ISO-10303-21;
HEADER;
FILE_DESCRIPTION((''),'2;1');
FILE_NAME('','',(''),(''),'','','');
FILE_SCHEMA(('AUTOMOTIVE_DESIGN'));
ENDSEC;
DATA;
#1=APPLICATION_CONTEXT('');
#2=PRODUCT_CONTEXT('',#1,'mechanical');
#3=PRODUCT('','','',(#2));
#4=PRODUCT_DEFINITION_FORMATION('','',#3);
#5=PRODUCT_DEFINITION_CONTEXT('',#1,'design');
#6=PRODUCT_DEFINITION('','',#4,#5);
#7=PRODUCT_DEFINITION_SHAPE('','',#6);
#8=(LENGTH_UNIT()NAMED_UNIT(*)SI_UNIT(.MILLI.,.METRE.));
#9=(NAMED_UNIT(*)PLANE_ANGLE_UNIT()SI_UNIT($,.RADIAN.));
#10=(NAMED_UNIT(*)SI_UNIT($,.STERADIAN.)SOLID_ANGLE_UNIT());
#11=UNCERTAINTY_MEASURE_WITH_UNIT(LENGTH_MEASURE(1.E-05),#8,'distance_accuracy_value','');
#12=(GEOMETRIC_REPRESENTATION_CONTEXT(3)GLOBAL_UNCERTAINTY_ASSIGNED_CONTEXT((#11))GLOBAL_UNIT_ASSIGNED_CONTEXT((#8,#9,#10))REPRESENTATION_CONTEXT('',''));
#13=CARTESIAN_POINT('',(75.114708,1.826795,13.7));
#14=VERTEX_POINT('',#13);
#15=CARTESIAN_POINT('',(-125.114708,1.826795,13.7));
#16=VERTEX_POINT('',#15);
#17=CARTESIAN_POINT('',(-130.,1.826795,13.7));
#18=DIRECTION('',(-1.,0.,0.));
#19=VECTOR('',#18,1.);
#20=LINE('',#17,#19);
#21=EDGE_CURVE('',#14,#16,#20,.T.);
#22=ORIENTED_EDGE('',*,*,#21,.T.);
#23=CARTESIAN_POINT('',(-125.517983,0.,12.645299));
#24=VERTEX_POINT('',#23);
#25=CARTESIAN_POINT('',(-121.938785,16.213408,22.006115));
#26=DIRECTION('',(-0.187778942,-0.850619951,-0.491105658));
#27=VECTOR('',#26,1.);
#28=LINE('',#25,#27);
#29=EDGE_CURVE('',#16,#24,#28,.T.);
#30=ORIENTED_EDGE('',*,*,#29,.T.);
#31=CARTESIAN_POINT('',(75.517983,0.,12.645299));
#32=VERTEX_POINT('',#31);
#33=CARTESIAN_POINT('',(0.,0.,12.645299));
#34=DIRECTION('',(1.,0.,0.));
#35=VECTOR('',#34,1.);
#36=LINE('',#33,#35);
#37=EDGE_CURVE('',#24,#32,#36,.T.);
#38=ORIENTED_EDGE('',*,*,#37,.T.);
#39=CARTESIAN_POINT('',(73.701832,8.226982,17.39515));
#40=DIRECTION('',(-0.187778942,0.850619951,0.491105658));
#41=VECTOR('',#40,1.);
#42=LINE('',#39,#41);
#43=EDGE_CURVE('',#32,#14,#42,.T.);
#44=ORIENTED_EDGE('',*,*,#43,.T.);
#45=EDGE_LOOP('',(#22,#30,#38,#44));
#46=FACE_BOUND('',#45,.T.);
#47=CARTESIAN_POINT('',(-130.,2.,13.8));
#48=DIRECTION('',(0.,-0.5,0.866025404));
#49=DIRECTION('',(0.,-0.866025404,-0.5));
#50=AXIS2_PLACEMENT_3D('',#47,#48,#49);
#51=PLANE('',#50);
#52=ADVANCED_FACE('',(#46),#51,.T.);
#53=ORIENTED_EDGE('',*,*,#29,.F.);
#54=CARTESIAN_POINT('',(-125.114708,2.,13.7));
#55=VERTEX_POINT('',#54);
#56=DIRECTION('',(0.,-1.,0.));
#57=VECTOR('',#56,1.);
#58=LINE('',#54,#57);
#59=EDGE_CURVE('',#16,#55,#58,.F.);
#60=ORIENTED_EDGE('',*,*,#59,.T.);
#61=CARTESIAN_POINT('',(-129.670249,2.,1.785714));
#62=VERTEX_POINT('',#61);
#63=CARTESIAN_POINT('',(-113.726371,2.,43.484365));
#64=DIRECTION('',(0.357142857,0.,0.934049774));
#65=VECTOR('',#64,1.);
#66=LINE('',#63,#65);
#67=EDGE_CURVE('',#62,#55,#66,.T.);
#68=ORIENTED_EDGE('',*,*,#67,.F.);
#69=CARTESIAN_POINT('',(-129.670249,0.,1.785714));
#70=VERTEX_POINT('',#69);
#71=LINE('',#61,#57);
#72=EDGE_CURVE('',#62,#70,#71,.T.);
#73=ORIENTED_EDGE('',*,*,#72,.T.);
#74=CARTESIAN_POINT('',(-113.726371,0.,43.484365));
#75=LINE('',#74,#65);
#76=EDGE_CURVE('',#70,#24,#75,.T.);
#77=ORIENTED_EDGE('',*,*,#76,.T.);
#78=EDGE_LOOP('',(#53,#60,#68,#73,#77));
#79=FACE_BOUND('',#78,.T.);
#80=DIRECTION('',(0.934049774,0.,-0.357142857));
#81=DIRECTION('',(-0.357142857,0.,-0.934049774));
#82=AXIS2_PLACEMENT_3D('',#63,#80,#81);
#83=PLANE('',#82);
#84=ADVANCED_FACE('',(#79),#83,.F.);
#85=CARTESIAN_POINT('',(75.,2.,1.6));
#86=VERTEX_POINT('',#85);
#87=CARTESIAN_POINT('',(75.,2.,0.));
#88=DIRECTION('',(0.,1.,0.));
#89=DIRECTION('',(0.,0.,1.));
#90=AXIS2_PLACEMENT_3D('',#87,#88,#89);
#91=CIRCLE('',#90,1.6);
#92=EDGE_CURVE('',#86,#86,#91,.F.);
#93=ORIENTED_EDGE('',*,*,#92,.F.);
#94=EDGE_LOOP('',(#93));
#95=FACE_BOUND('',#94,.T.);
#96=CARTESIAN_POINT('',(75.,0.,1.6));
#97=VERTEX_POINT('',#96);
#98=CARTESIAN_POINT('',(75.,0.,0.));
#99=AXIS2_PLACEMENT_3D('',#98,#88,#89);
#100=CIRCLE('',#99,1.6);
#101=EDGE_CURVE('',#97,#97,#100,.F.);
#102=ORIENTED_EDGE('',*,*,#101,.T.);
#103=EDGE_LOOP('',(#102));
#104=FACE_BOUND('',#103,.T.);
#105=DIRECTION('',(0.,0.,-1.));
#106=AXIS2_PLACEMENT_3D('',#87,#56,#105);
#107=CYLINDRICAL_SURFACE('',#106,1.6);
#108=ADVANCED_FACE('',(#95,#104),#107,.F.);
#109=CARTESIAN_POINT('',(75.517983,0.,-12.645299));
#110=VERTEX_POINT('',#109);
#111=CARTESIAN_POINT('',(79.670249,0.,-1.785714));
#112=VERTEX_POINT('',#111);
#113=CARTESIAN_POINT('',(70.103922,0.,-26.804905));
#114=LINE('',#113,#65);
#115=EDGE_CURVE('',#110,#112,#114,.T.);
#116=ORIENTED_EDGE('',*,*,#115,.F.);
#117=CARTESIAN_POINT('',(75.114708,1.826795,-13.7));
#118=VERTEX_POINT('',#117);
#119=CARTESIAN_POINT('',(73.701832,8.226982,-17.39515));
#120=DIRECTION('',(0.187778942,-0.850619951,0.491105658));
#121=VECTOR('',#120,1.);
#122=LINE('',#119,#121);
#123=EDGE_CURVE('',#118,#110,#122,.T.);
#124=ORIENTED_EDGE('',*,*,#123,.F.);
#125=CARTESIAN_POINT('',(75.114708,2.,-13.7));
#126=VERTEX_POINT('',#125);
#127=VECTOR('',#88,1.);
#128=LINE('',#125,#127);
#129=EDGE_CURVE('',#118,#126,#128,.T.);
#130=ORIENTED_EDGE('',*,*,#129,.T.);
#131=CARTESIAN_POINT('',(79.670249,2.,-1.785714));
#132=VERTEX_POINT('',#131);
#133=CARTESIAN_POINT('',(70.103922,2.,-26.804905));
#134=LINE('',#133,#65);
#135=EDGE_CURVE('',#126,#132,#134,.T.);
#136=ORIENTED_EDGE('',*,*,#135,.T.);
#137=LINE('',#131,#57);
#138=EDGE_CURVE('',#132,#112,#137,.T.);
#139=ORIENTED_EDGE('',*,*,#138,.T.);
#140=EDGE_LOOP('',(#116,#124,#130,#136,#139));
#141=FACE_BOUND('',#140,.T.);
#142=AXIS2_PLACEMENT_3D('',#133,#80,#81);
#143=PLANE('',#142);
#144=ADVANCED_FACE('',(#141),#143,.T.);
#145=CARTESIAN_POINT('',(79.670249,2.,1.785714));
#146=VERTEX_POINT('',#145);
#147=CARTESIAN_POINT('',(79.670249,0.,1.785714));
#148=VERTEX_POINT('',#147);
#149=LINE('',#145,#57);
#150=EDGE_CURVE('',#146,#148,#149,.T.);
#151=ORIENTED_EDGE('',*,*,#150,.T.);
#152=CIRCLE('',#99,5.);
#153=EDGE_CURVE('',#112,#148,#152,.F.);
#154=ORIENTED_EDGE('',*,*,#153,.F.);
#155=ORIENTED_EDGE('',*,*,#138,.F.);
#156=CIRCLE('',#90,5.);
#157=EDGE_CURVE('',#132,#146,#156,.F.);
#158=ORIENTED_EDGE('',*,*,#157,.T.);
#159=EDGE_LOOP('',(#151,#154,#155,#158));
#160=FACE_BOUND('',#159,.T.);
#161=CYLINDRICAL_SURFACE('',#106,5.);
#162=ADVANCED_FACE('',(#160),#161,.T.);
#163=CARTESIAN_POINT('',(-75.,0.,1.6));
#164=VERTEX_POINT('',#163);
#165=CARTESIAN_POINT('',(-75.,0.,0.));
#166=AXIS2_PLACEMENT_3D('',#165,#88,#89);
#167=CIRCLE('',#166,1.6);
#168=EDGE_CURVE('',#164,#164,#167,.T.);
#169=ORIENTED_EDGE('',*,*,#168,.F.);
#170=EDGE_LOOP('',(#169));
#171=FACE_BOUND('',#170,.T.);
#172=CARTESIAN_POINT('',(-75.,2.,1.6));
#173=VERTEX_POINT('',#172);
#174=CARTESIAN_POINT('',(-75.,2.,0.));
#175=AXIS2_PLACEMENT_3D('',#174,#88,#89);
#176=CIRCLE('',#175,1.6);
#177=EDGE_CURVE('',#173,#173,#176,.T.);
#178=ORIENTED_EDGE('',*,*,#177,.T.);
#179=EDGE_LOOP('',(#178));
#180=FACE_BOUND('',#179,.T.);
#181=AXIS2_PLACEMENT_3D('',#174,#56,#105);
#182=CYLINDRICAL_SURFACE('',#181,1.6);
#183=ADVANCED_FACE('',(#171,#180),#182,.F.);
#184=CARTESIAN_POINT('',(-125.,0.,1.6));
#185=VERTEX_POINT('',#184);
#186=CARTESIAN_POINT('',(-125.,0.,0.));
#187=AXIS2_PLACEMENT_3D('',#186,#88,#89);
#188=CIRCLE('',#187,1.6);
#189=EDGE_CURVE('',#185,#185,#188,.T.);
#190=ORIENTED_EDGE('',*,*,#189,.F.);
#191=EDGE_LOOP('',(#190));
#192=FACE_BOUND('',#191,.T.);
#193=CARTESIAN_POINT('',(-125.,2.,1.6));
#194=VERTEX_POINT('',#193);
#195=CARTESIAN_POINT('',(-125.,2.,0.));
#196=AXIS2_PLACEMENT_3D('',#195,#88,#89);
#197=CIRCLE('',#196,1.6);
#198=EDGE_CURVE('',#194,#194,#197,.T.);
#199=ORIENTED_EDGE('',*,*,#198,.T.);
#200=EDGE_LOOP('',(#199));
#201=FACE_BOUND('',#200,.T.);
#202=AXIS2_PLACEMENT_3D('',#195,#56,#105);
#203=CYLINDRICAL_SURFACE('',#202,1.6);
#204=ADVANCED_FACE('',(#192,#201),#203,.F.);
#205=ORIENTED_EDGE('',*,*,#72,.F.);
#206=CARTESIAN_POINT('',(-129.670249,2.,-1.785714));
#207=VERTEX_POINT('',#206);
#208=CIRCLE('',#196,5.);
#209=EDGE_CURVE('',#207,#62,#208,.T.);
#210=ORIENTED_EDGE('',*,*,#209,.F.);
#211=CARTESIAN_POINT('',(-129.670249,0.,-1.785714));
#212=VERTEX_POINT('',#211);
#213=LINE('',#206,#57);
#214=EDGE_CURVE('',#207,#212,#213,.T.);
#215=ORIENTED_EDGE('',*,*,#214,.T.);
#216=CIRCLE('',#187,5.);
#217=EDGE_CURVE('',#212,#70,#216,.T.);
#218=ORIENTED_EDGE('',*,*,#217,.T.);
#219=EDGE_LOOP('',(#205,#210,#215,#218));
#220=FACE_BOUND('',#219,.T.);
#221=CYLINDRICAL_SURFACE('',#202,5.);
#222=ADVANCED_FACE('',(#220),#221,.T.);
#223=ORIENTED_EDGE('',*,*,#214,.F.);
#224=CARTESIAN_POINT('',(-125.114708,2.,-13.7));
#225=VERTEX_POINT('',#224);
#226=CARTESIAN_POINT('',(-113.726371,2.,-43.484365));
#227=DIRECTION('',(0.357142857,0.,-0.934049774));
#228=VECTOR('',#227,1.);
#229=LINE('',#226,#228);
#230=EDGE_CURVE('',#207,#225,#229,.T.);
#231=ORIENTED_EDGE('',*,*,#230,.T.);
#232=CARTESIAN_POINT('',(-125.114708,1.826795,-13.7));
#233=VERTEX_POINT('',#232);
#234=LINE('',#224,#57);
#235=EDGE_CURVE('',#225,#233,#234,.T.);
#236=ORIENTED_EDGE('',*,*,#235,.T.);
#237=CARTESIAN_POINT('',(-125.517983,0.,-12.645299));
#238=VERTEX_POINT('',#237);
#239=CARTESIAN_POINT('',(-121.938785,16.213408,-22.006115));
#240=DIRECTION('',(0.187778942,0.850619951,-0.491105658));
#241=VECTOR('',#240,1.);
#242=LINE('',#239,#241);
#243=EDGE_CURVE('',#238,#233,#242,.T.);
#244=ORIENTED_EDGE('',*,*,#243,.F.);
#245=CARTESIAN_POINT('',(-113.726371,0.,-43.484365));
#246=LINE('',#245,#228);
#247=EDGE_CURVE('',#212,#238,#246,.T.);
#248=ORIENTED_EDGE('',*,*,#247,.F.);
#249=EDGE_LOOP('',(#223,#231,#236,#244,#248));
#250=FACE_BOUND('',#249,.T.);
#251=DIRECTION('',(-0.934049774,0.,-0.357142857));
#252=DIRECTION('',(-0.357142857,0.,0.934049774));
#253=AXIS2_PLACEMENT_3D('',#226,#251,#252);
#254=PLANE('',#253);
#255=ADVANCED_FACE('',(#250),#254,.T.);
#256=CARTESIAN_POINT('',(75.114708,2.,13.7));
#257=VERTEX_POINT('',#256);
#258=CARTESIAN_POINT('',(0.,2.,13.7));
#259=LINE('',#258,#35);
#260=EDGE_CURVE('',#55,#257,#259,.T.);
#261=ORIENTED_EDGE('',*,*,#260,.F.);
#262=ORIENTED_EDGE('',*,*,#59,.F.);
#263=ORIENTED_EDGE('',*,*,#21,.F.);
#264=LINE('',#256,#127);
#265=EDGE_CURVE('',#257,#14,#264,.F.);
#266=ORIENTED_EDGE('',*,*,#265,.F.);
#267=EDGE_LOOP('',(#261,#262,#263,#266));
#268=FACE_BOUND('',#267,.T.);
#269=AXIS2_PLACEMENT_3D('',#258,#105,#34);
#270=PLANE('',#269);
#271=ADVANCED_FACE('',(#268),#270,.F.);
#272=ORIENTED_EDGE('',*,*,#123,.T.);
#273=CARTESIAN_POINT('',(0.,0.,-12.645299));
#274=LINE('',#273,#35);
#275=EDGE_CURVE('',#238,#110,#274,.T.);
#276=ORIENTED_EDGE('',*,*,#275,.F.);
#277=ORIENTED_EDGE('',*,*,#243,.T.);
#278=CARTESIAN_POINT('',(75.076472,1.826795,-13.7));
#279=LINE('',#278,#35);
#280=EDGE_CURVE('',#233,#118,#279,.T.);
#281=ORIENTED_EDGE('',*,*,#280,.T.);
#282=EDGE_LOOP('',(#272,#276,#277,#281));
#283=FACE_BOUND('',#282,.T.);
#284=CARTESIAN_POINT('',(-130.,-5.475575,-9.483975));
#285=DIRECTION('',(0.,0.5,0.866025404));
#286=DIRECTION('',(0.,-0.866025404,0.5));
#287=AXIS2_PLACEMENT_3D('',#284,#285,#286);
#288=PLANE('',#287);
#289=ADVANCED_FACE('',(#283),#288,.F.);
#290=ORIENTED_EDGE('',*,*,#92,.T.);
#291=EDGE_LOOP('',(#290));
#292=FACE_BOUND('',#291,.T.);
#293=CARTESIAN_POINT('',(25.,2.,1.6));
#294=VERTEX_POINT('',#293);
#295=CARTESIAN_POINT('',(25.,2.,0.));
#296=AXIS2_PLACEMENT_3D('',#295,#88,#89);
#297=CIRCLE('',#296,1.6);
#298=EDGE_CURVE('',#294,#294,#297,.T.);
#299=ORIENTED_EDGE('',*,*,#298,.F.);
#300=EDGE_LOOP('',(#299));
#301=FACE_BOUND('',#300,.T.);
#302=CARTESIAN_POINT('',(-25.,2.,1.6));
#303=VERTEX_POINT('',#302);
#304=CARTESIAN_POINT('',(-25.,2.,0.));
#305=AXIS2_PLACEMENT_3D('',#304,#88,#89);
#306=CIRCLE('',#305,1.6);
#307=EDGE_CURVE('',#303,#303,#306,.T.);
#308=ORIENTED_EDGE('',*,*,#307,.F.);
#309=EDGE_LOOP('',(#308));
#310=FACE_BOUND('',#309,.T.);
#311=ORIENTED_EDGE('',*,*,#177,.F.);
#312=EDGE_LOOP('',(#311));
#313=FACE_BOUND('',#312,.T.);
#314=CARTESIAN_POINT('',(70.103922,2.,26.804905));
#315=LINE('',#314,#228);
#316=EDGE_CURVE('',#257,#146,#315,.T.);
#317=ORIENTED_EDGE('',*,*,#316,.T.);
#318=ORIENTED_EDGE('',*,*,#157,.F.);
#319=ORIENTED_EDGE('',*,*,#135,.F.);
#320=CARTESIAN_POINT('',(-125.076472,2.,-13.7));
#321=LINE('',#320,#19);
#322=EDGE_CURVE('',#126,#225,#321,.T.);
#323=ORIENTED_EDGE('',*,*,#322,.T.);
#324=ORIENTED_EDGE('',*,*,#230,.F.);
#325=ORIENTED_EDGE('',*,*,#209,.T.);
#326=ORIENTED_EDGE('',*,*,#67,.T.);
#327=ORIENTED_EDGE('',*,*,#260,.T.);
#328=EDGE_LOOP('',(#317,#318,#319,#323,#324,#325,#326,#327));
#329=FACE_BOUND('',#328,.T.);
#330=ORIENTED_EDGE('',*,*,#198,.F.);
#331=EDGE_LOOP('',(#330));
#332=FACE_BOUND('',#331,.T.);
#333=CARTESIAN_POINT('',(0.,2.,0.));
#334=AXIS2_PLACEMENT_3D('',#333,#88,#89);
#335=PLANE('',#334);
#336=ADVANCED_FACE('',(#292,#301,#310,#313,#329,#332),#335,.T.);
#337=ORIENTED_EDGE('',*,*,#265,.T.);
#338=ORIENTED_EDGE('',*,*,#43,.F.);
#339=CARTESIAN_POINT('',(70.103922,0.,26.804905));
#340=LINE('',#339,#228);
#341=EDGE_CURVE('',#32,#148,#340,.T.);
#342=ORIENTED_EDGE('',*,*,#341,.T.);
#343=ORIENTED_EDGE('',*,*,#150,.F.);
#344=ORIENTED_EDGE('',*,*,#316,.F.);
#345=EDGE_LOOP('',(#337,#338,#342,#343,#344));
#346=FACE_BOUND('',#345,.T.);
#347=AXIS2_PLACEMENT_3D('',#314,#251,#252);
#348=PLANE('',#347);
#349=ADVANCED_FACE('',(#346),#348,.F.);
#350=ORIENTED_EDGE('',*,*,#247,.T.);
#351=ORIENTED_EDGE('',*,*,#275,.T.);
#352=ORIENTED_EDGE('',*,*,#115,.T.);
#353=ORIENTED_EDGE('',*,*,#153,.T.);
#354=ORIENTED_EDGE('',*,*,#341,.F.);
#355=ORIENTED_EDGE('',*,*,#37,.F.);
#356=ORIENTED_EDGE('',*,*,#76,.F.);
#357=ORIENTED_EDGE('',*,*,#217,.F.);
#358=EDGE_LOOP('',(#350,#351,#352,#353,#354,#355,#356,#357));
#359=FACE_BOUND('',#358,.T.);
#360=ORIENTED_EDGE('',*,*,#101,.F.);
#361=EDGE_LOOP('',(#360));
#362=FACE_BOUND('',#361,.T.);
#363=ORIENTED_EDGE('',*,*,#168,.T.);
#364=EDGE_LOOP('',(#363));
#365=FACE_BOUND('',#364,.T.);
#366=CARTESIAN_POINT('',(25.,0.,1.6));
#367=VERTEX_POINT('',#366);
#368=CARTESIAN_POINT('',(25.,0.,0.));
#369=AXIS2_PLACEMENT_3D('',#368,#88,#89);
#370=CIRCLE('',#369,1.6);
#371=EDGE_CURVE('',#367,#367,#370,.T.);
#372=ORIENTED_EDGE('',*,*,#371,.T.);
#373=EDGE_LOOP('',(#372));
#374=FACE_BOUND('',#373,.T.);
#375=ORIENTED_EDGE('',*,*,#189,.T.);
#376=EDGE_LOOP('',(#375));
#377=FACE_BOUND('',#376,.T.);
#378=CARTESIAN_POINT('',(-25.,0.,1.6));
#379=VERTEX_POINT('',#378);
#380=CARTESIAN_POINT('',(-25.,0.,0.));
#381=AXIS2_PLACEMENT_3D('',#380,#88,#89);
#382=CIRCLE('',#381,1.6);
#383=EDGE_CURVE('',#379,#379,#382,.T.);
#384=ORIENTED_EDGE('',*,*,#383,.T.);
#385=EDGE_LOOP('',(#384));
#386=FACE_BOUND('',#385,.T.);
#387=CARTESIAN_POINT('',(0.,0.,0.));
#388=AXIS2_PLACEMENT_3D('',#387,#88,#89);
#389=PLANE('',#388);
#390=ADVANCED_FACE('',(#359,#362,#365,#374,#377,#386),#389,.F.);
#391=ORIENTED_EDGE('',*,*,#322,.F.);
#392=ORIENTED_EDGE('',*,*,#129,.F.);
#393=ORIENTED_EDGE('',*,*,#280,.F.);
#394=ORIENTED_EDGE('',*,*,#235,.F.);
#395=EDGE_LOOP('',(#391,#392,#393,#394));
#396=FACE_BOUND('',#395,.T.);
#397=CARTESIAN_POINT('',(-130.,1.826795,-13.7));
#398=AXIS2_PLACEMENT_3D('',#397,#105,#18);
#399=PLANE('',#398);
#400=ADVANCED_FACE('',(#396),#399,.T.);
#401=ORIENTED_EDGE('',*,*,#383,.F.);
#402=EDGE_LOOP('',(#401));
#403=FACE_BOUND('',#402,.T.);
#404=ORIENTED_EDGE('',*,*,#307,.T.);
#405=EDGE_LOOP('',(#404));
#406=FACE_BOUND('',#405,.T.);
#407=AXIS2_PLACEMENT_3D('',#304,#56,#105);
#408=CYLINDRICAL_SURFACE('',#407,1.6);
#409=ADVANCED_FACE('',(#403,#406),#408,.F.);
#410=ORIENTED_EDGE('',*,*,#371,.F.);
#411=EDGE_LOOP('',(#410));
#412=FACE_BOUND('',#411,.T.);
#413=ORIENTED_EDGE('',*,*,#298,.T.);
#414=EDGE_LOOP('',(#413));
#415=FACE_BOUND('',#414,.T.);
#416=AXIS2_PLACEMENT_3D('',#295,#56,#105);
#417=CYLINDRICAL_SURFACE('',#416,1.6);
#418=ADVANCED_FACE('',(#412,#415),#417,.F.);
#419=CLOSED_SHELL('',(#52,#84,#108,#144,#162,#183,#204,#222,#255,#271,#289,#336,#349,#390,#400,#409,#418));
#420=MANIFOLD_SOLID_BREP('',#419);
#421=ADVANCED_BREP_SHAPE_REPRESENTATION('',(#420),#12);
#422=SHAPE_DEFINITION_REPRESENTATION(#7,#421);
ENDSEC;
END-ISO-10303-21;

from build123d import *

# Parameters (mm, degrees)
SKETCH_1_R               = 1.6
EXTRUDE_1_DEPTH          = 2
CUT_EXTRUDE_1_DEPTH      = 5
CUT_EXTRUDE_1_DEPTH_BACK = 210
CHAMFER_2_SIZE           = 0.2
CHAMFER_2_SIZE_2         = 0.1


with BuildPart() as part:
    # Эскиз1 → Бобышка-Вытянуть1 (new body)
    with BuildSketch(Plane(origin=(0, 0, 0), x_dir=(1, 0, 0), z_dir=(0, 1, 0))):
        with BuildLine():
            Line((-125, 14), (75, 14))
            Line((75, 14), (79.670248868, 1.785714286))
            ThreePointArc((79.670248868, 1.785714286), (80, 0), (79.670248868, -1.785714286))
            Line((79.670248868, -1.785714286), (75, -14))
            Line((75, -14), (-75, -14))
            Line((-75, -14), (-125, -14))
            Line((-125, -14), (-129.670248868, -1.785714286))
            ThreePointArc((-129.670248868, -1.785714286), (-130, 0), (-129.670248868, 1.785714286))
            Line((-129.670248868, 1.785714286), (-125, 14))
        make_face()
        with Locations(Location((-75, 0, 0), (0, 0, 270))):
            Circle(SKETCH_1_R, mode=Mode.SUBTRACT)
        with Locations(Location((75, 0, 0), (0, 0, 270))):
            Circle(SKETCH_1_R, mode=Mode.SUBTRACT)
        with Locations(Location((-25, 0, 0), (0, 0, 270))):
            Circle(SKETCH_1_R, mode=Mode.SUBTRACT)
        with Locations(Location((25, 0, 0), (0, 0, 270))):
            Circle(SKETCH_1_R, mode=Mode.SUBTRACT)
        with Locations(Location((-125, 0, 0), (0, 0, 270))):
            Circle(SKETCH_1_R, mode=Mode.SUBTRACT)
    extrude(amount=EXTRUDE_1_DEPTH)

    # Эскиз4 → Вырез-Вытянуть1 (cut, two sides: drawn at the far end of the back side and taken through both)
    with BuildSketch(Plane.ZY.offset(125).offset(-CUT_EXTRUDE_1_DEPTH_BACK)):
        Polygon((-14, 2), (-14, 0), (-12.645299462, 0), (-13.8, 2), align=None)
        Polygon((14, 2), (14, 0), (12.645299462, 0), (13.8, 2), align=None)
    extrude(amount=CUT_EXTRUDE_1_DEPTH + CUT_EXTRUDE_1_DEPTH_BACK, mode=Mode.SUBTRACT)

    # Фаска2
    # the kernel refuses this chamfer: 0.2, 0.1 mm, written as the material it takes off along each edge
    with BuildSketch(Plane(origin=(-125.593889062, 2, -13.8), x_dir=(0, -0.875527030904719, 0.48316914031751595), z_dir=(1, 0, 0))) as chamfer_2_piece_1:
        Polygon((CHAMFER_2_SIZE * 0.999813220622, -CHAMFER_2_SIZE * 0.0193267656127), (CHAMFER_2_SIZE_2 * 0.483169140318, -CHAMFER_2_SIZE_2 * 0.875527030905), (0, 0), align=None)
    extrude(amount=201.187778124, mode=Mode.SUBTRACT)
    with BuildSketch(Plane(origin=(75.593889062, 2, 13.8), x_dir=(1.1200704684646426e-15, 0.07974522228289034, -0.996815278536125), z_dir=(-1, 0, 0))) as chamfer_2_piece_2:
        Polygon((CHAMFER_2_SIZE_2 * 0.996815278536, CHAMFER_2_SIZE_2 * 0.0797452222829), (CHAMFER_2_SIZE * 0.429346250941, CHAMFER_2_SIZE * 0.903139965234), (0, 0), align=None)
    extrude(amount=201.187778124, mode=Mode.SUBTRACT)


solid = part.part
